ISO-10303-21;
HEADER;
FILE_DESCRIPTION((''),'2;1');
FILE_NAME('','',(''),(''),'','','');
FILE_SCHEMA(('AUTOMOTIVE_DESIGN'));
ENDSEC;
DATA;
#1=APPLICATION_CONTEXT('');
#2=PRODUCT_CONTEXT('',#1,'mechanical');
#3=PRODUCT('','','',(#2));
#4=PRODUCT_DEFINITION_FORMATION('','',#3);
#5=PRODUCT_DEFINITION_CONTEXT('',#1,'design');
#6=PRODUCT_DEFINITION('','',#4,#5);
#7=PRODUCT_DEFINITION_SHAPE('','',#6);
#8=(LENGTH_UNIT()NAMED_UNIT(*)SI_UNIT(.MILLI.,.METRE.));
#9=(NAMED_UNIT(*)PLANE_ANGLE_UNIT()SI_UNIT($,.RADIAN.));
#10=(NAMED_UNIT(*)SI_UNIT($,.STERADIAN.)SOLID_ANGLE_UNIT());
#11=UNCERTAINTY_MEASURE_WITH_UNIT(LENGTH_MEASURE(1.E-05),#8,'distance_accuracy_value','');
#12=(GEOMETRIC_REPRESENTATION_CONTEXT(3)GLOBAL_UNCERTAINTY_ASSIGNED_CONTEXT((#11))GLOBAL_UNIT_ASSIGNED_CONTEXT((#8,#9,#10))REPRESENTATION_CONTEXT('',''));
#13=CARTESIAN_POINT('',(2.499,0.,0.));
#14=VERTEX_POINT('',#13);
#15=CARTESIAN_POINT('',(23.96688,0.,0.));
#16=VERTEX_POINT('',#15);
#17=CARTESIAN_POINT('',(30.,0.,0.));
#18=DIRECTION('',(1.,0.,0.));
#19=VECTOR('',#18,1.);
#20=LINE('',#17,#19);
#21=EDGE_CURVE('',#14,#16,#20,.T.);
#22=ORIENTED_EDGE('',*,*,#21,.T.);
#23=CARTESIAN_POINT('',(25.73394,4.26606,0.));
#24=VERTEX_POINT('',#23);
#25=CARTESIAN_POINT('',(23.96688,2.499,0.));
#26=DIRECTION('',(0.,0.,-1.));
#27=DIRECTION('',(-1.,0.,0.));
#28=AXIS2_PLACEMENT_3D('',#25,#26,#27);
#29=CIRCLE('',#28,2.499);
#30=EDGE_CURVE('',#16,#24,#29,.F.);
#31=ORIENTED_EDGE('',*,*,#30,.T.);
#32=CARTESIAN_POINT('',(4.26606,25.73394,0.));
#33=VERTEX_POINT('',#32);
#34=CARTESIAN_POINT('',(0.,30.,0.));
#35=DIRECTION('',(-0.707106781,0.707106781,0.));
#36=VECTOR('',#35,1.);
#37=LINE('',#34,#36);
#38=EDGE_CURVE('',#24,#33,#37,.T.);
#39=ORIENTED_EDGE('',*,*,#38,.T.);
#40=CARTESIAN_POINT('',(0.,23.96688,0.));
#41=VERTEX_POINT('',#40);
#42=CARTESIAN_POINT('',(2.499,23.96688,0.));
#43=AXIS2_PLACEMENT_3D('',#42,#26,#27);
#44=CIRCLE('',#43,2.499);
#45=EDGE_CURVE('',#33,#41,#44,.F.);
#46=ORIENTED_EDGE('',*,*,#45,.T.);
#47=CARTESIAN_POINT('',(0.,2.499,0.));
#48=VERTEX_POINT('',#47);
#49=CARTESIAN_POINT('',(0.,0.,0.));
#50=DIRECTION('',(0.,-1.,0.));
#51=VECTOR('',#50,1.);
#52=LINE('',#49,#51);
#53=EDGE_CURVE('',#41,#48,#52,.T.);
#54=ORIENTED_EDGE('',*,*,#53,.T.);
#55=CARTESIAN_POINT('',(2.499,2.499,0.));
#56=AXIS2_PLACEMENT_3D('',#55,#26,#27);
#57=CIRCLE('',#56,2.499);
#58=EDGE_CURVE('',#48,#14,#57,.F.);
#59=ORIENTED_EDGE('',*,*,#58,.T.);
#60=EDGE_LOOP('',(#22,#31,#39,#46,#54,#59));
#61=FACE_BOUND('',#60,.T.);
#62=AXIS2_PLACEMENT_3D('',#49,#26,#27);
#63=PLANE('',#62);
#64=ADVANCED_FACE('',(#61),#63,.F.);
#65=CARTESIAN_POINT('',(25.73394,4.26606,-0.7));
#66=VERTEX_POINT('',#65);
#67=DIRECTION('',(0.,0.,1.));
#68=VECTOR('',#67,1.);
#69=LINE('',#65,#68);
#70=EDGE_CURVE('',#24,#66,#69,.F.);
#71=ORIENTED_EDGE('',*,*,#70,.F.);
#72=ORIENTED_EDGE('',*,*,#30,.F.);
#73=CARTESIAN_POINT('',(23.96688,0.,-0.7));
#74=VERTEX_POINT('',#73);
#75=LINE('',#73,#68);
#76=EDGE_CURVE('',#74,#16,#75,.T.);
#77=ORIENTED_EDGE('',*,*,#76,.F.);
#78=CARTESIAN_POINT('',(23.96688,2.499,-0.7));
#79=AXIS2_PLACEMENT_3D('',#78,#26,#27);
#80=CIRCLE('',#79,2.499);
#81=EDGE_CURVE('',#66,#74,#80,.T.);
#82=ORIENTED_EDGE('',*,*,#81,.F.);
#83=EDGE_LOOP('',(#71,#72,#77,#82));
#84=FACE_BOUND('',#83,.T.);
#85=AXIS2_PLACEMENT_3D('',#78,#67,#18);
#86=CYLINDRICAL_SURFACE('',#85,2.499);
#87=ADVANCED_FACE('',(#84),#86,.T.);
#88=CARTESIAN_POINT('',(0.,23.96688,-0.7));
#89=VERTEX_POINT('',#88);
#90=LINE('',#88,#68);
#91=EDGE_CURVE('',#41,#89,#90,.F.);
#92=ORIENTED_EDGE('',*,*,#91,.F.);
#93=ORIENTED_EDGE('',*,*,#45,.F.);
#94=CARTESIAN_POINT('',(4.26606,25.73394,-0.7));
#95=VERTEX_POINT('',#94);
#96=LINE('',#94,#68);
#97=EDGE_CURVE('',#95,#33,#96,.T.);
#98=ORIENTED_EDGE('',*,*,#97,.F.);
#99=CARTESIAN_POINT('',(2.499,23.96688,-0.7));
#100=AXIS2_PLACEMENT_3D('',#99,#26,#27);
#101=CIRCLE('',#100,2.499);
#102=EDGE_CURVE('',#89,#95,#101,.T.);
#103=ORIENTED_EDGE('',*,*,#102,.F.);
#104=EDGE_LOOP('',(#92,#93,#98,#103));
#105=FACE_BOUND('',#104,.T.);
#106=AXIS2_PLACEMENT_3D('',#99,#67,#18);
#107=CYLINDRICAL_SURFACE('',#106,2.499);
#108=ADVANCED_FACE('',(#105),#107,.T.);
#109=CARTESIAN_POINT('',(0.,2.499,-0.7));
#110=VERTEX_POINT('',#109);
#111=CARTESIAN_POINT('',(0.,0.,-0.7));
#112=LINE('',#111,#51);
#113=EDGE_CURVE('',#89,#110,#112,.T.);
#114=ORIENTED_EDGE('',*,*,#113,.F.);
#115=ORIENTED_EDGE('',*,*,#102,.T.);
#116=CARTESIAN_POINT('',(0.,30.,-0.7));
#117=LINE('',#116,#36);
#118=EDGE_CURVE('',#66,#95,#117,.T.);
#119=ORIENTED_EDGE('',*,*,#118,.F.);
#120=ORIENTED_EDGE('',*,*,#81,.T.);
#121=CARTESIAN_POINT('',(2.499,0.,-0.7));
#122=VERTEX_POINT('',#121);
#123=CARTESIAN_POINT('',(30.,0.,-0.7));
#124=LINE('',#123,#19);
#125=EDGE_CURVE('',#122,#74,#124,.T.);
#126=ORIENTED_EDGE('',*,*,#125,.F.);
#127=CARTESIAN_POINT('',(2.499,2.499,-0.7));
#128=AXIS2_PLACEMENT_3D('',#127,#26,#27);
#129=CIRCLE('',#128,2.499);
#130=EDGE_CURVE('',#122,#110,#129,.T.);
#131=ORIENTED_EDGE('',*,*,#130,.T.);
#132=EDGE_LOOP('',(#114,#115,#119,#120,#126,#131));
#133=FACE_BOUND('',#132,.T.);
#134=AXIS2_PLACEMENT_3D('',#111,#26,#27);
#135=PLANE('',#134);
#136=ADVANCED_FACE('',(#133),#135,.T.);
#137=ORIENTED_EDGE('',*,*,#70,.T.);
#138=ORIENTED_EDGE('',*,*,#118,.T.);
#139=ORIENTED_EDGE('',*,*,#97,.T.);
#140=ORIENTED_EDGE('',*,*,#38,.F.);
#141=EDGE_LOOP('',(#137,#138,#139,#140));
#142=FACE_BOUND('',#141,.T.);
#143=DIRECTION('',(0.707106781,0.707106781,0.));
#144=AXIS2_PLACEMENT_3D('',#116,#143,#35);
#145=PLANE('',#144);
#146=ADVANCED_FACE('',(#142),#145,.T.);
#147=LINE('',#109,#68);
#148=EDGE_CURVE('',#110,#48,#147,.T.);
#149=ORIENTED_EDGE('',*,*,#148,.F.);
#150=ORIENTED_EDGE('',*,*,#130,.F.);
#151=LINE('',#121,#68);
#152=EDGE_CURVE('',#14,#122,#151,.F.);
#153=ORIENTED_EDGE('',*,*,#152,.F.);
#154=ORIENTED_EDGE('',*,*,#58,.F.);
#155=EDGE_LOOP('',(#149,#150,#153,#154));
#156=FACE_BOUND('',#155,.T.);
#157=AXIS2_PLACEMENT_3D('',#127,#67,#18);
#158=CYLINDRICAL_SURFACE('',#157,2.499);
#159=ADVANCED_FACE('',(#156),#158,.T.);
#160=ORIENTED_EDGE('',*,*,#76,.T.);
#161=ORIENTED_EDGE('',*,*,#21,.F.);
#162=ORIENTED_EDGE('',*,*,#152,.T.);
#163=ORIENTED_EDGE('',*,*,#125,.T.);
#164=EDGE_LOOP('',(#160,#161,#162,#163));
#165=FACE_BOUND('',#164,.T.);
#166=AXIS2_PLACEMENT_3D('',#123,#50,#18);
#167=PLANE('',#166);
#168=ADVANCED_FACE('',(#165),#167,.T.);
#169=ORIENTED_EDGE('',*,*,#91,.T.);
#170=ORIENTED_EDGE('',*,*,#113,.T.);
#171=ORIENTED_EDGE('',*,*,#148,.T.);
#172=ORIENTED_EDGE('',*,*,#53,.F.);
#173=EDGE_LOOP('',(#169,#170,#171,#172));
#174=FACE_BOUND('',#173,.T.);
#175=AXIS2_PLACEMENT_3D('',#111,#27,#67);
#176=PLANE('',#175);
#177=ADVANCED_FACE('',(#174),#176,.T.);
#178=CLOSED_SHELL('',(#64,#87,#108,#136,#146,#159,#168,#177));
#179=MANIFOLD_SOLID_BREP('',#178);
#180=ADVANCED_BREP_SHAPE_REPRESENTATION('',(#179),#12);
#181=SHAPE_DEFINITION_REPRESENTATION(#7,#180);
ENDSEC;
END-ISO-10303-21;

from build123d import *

# Parameters (mm, degrees)
BASE_FLANGE1_DEPTH  = 0.7
BREAK_CORNER1_START = -0.7
BREAK_CORNER1_DEPTH = 0.7


# Read off the part's stored shape, not the designer's step: Break-Corner1
# Sheet-metal steps are written as plain solids
with BuildPart() as part:
    # Sketch1 → Base-Flange1 (new body)
    with BuildSketch(Plane.XY):
        Polygon((0, 0), (0, 30), (30, 0), align=None)
    extrude(amount=-BASE_FLANGE1_DEPTH)

    # Break-Corner1 outline → Break-Corner1 (cut)
    with BuildSketch(Plane.XY.offset(BREAK_CORNER1_START)):
        with BuildLine():
            ThreePointArc((2.499, 0), (0.731940154, 0.731940154), (0, 2.499))
            Line((0, 2.499), (0, 0))
            Line((0, 0), (2.499, 0))
        make_face()
        with BuildLine():
            Line((0, 30), (0, 23.966880308))
            ThreePointArc((0, 23.966880308), (1.542674103, 26.275655259), (4.266059846, 25.733940154))
            Line((4.266059846, 25.733940154), (0, 30))
        make_face()
        with BuildLine():
            ThreePointArc((25.733940154, 4.266059846), (26.275655259, 1.542674103), (23.966880308, 0))
            Line((23.966880308, 0), (30, 0))
            Line((30, 0), (25.733940154, 4.266059846))
        make_face()
    extrude(amount=BREAK_CORNER1_DEPTH, mode=Mode.SUBTRACT)


solid = part.part
